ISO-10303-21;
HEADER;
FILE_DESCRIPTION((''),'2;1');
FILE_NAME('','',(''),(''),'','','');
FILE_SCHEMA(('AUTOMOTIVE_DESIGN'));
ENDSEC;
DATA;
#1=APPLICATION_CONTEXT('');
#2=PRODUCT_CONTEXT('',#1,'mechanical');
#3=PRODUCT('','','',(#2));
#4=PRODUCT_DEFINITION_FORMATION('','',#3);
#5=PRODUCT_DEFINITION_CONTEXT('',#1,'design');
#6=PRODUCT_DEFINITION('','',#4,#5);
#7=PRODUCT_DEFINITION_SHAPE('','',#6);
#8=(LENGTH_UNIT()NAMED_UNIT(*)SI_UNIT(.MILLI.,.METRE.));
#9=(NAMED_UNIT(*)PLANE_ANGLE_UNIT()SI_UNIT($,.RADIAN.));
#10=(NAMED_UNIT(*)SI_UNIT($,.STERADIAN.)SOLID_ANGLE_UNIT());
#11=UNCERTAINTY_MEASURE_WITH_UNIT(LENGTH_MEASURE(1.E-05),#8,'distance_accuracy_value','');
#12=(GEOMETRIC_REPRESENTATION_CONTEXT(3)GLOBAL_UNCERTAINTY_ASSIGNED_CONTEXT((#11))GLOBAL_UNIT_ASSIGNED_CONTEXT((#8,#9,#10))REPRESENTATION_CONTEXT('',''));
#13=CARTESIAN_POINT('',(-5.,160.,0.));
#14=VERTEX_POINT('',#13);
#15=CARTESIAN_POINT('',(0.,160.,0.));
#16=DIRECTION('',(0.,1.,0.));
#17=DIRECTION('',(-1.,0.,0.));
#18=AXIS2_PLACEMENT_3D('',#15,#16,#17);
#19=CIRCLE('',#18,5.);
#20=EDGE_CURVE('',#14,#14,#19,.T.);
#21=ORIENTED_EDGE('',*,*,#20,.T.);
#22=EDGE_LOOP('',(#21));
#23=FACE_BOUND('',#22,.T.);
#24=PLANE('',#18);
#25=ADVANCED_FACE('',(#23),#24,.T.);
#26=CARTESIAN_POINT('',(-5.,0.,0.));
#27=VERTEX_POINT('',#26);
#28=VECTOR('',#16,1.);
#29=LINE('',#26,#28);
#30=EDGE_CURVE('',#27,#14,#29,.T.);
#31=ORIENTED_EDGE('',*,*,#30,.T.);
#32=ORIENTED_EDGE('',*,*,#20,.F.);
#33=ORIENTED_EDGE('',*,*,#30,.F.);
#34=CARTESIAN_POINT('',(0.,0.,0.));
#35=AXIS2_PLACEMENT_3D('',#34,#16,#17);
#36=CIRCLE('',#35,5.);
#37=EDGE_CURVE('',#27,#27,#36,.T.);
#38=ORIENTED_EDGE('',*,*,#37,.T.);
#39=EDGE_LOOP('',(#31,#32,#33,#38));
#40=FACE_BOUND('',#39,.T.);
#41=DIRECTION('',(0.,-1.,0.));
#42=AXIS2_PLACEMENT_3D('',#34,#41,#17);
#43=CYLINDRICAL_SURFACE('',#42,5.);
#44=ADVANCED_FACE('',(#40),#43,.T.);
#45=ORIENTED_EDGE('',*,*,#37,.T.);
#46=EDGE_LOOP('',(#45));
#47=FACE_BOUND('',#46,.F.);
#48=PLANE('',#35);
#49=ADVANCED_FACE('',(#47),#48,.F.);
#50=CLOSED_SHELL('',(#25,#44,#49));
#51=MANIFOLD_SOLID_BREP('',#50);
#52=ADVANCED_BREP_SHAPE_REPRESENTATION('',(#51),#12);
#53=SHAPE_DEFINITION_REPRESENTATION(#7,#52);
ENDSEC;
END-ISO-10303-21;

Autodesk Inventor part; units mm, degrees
ref_plane "YZ Plane" through (0, 0, 0) normal (1, 0, 0) x (0, 1, 0)
ref_plane "XZ Plane" through (0, 0, 0) normal (0, 1, 0) x (-1, 0, 0)
ref_plane "XY Plane" through (0, 0, 0) normal (0, 0, 1) x (1, 0, 0)
sketch "Skizze1" plane through (0, 0, 0) normal (0, 1, 0) x (-1, 0, 0)
  circle A0 centre (0, 0) radius 5
  dimension "d0" = 10
extrude "Extrusion1" add sketch "Skizze1" along normal blind 160
thread "Gewinde1" size "M10x1.5" class "6g" standard "ANSI Metric M Profile" length 10
thread "Gewinde2" size "M10x1.5" class "6g" standard "ANSI Metric M Profile" length 10
properties part number "verbinder3" material "Edelstahl"
